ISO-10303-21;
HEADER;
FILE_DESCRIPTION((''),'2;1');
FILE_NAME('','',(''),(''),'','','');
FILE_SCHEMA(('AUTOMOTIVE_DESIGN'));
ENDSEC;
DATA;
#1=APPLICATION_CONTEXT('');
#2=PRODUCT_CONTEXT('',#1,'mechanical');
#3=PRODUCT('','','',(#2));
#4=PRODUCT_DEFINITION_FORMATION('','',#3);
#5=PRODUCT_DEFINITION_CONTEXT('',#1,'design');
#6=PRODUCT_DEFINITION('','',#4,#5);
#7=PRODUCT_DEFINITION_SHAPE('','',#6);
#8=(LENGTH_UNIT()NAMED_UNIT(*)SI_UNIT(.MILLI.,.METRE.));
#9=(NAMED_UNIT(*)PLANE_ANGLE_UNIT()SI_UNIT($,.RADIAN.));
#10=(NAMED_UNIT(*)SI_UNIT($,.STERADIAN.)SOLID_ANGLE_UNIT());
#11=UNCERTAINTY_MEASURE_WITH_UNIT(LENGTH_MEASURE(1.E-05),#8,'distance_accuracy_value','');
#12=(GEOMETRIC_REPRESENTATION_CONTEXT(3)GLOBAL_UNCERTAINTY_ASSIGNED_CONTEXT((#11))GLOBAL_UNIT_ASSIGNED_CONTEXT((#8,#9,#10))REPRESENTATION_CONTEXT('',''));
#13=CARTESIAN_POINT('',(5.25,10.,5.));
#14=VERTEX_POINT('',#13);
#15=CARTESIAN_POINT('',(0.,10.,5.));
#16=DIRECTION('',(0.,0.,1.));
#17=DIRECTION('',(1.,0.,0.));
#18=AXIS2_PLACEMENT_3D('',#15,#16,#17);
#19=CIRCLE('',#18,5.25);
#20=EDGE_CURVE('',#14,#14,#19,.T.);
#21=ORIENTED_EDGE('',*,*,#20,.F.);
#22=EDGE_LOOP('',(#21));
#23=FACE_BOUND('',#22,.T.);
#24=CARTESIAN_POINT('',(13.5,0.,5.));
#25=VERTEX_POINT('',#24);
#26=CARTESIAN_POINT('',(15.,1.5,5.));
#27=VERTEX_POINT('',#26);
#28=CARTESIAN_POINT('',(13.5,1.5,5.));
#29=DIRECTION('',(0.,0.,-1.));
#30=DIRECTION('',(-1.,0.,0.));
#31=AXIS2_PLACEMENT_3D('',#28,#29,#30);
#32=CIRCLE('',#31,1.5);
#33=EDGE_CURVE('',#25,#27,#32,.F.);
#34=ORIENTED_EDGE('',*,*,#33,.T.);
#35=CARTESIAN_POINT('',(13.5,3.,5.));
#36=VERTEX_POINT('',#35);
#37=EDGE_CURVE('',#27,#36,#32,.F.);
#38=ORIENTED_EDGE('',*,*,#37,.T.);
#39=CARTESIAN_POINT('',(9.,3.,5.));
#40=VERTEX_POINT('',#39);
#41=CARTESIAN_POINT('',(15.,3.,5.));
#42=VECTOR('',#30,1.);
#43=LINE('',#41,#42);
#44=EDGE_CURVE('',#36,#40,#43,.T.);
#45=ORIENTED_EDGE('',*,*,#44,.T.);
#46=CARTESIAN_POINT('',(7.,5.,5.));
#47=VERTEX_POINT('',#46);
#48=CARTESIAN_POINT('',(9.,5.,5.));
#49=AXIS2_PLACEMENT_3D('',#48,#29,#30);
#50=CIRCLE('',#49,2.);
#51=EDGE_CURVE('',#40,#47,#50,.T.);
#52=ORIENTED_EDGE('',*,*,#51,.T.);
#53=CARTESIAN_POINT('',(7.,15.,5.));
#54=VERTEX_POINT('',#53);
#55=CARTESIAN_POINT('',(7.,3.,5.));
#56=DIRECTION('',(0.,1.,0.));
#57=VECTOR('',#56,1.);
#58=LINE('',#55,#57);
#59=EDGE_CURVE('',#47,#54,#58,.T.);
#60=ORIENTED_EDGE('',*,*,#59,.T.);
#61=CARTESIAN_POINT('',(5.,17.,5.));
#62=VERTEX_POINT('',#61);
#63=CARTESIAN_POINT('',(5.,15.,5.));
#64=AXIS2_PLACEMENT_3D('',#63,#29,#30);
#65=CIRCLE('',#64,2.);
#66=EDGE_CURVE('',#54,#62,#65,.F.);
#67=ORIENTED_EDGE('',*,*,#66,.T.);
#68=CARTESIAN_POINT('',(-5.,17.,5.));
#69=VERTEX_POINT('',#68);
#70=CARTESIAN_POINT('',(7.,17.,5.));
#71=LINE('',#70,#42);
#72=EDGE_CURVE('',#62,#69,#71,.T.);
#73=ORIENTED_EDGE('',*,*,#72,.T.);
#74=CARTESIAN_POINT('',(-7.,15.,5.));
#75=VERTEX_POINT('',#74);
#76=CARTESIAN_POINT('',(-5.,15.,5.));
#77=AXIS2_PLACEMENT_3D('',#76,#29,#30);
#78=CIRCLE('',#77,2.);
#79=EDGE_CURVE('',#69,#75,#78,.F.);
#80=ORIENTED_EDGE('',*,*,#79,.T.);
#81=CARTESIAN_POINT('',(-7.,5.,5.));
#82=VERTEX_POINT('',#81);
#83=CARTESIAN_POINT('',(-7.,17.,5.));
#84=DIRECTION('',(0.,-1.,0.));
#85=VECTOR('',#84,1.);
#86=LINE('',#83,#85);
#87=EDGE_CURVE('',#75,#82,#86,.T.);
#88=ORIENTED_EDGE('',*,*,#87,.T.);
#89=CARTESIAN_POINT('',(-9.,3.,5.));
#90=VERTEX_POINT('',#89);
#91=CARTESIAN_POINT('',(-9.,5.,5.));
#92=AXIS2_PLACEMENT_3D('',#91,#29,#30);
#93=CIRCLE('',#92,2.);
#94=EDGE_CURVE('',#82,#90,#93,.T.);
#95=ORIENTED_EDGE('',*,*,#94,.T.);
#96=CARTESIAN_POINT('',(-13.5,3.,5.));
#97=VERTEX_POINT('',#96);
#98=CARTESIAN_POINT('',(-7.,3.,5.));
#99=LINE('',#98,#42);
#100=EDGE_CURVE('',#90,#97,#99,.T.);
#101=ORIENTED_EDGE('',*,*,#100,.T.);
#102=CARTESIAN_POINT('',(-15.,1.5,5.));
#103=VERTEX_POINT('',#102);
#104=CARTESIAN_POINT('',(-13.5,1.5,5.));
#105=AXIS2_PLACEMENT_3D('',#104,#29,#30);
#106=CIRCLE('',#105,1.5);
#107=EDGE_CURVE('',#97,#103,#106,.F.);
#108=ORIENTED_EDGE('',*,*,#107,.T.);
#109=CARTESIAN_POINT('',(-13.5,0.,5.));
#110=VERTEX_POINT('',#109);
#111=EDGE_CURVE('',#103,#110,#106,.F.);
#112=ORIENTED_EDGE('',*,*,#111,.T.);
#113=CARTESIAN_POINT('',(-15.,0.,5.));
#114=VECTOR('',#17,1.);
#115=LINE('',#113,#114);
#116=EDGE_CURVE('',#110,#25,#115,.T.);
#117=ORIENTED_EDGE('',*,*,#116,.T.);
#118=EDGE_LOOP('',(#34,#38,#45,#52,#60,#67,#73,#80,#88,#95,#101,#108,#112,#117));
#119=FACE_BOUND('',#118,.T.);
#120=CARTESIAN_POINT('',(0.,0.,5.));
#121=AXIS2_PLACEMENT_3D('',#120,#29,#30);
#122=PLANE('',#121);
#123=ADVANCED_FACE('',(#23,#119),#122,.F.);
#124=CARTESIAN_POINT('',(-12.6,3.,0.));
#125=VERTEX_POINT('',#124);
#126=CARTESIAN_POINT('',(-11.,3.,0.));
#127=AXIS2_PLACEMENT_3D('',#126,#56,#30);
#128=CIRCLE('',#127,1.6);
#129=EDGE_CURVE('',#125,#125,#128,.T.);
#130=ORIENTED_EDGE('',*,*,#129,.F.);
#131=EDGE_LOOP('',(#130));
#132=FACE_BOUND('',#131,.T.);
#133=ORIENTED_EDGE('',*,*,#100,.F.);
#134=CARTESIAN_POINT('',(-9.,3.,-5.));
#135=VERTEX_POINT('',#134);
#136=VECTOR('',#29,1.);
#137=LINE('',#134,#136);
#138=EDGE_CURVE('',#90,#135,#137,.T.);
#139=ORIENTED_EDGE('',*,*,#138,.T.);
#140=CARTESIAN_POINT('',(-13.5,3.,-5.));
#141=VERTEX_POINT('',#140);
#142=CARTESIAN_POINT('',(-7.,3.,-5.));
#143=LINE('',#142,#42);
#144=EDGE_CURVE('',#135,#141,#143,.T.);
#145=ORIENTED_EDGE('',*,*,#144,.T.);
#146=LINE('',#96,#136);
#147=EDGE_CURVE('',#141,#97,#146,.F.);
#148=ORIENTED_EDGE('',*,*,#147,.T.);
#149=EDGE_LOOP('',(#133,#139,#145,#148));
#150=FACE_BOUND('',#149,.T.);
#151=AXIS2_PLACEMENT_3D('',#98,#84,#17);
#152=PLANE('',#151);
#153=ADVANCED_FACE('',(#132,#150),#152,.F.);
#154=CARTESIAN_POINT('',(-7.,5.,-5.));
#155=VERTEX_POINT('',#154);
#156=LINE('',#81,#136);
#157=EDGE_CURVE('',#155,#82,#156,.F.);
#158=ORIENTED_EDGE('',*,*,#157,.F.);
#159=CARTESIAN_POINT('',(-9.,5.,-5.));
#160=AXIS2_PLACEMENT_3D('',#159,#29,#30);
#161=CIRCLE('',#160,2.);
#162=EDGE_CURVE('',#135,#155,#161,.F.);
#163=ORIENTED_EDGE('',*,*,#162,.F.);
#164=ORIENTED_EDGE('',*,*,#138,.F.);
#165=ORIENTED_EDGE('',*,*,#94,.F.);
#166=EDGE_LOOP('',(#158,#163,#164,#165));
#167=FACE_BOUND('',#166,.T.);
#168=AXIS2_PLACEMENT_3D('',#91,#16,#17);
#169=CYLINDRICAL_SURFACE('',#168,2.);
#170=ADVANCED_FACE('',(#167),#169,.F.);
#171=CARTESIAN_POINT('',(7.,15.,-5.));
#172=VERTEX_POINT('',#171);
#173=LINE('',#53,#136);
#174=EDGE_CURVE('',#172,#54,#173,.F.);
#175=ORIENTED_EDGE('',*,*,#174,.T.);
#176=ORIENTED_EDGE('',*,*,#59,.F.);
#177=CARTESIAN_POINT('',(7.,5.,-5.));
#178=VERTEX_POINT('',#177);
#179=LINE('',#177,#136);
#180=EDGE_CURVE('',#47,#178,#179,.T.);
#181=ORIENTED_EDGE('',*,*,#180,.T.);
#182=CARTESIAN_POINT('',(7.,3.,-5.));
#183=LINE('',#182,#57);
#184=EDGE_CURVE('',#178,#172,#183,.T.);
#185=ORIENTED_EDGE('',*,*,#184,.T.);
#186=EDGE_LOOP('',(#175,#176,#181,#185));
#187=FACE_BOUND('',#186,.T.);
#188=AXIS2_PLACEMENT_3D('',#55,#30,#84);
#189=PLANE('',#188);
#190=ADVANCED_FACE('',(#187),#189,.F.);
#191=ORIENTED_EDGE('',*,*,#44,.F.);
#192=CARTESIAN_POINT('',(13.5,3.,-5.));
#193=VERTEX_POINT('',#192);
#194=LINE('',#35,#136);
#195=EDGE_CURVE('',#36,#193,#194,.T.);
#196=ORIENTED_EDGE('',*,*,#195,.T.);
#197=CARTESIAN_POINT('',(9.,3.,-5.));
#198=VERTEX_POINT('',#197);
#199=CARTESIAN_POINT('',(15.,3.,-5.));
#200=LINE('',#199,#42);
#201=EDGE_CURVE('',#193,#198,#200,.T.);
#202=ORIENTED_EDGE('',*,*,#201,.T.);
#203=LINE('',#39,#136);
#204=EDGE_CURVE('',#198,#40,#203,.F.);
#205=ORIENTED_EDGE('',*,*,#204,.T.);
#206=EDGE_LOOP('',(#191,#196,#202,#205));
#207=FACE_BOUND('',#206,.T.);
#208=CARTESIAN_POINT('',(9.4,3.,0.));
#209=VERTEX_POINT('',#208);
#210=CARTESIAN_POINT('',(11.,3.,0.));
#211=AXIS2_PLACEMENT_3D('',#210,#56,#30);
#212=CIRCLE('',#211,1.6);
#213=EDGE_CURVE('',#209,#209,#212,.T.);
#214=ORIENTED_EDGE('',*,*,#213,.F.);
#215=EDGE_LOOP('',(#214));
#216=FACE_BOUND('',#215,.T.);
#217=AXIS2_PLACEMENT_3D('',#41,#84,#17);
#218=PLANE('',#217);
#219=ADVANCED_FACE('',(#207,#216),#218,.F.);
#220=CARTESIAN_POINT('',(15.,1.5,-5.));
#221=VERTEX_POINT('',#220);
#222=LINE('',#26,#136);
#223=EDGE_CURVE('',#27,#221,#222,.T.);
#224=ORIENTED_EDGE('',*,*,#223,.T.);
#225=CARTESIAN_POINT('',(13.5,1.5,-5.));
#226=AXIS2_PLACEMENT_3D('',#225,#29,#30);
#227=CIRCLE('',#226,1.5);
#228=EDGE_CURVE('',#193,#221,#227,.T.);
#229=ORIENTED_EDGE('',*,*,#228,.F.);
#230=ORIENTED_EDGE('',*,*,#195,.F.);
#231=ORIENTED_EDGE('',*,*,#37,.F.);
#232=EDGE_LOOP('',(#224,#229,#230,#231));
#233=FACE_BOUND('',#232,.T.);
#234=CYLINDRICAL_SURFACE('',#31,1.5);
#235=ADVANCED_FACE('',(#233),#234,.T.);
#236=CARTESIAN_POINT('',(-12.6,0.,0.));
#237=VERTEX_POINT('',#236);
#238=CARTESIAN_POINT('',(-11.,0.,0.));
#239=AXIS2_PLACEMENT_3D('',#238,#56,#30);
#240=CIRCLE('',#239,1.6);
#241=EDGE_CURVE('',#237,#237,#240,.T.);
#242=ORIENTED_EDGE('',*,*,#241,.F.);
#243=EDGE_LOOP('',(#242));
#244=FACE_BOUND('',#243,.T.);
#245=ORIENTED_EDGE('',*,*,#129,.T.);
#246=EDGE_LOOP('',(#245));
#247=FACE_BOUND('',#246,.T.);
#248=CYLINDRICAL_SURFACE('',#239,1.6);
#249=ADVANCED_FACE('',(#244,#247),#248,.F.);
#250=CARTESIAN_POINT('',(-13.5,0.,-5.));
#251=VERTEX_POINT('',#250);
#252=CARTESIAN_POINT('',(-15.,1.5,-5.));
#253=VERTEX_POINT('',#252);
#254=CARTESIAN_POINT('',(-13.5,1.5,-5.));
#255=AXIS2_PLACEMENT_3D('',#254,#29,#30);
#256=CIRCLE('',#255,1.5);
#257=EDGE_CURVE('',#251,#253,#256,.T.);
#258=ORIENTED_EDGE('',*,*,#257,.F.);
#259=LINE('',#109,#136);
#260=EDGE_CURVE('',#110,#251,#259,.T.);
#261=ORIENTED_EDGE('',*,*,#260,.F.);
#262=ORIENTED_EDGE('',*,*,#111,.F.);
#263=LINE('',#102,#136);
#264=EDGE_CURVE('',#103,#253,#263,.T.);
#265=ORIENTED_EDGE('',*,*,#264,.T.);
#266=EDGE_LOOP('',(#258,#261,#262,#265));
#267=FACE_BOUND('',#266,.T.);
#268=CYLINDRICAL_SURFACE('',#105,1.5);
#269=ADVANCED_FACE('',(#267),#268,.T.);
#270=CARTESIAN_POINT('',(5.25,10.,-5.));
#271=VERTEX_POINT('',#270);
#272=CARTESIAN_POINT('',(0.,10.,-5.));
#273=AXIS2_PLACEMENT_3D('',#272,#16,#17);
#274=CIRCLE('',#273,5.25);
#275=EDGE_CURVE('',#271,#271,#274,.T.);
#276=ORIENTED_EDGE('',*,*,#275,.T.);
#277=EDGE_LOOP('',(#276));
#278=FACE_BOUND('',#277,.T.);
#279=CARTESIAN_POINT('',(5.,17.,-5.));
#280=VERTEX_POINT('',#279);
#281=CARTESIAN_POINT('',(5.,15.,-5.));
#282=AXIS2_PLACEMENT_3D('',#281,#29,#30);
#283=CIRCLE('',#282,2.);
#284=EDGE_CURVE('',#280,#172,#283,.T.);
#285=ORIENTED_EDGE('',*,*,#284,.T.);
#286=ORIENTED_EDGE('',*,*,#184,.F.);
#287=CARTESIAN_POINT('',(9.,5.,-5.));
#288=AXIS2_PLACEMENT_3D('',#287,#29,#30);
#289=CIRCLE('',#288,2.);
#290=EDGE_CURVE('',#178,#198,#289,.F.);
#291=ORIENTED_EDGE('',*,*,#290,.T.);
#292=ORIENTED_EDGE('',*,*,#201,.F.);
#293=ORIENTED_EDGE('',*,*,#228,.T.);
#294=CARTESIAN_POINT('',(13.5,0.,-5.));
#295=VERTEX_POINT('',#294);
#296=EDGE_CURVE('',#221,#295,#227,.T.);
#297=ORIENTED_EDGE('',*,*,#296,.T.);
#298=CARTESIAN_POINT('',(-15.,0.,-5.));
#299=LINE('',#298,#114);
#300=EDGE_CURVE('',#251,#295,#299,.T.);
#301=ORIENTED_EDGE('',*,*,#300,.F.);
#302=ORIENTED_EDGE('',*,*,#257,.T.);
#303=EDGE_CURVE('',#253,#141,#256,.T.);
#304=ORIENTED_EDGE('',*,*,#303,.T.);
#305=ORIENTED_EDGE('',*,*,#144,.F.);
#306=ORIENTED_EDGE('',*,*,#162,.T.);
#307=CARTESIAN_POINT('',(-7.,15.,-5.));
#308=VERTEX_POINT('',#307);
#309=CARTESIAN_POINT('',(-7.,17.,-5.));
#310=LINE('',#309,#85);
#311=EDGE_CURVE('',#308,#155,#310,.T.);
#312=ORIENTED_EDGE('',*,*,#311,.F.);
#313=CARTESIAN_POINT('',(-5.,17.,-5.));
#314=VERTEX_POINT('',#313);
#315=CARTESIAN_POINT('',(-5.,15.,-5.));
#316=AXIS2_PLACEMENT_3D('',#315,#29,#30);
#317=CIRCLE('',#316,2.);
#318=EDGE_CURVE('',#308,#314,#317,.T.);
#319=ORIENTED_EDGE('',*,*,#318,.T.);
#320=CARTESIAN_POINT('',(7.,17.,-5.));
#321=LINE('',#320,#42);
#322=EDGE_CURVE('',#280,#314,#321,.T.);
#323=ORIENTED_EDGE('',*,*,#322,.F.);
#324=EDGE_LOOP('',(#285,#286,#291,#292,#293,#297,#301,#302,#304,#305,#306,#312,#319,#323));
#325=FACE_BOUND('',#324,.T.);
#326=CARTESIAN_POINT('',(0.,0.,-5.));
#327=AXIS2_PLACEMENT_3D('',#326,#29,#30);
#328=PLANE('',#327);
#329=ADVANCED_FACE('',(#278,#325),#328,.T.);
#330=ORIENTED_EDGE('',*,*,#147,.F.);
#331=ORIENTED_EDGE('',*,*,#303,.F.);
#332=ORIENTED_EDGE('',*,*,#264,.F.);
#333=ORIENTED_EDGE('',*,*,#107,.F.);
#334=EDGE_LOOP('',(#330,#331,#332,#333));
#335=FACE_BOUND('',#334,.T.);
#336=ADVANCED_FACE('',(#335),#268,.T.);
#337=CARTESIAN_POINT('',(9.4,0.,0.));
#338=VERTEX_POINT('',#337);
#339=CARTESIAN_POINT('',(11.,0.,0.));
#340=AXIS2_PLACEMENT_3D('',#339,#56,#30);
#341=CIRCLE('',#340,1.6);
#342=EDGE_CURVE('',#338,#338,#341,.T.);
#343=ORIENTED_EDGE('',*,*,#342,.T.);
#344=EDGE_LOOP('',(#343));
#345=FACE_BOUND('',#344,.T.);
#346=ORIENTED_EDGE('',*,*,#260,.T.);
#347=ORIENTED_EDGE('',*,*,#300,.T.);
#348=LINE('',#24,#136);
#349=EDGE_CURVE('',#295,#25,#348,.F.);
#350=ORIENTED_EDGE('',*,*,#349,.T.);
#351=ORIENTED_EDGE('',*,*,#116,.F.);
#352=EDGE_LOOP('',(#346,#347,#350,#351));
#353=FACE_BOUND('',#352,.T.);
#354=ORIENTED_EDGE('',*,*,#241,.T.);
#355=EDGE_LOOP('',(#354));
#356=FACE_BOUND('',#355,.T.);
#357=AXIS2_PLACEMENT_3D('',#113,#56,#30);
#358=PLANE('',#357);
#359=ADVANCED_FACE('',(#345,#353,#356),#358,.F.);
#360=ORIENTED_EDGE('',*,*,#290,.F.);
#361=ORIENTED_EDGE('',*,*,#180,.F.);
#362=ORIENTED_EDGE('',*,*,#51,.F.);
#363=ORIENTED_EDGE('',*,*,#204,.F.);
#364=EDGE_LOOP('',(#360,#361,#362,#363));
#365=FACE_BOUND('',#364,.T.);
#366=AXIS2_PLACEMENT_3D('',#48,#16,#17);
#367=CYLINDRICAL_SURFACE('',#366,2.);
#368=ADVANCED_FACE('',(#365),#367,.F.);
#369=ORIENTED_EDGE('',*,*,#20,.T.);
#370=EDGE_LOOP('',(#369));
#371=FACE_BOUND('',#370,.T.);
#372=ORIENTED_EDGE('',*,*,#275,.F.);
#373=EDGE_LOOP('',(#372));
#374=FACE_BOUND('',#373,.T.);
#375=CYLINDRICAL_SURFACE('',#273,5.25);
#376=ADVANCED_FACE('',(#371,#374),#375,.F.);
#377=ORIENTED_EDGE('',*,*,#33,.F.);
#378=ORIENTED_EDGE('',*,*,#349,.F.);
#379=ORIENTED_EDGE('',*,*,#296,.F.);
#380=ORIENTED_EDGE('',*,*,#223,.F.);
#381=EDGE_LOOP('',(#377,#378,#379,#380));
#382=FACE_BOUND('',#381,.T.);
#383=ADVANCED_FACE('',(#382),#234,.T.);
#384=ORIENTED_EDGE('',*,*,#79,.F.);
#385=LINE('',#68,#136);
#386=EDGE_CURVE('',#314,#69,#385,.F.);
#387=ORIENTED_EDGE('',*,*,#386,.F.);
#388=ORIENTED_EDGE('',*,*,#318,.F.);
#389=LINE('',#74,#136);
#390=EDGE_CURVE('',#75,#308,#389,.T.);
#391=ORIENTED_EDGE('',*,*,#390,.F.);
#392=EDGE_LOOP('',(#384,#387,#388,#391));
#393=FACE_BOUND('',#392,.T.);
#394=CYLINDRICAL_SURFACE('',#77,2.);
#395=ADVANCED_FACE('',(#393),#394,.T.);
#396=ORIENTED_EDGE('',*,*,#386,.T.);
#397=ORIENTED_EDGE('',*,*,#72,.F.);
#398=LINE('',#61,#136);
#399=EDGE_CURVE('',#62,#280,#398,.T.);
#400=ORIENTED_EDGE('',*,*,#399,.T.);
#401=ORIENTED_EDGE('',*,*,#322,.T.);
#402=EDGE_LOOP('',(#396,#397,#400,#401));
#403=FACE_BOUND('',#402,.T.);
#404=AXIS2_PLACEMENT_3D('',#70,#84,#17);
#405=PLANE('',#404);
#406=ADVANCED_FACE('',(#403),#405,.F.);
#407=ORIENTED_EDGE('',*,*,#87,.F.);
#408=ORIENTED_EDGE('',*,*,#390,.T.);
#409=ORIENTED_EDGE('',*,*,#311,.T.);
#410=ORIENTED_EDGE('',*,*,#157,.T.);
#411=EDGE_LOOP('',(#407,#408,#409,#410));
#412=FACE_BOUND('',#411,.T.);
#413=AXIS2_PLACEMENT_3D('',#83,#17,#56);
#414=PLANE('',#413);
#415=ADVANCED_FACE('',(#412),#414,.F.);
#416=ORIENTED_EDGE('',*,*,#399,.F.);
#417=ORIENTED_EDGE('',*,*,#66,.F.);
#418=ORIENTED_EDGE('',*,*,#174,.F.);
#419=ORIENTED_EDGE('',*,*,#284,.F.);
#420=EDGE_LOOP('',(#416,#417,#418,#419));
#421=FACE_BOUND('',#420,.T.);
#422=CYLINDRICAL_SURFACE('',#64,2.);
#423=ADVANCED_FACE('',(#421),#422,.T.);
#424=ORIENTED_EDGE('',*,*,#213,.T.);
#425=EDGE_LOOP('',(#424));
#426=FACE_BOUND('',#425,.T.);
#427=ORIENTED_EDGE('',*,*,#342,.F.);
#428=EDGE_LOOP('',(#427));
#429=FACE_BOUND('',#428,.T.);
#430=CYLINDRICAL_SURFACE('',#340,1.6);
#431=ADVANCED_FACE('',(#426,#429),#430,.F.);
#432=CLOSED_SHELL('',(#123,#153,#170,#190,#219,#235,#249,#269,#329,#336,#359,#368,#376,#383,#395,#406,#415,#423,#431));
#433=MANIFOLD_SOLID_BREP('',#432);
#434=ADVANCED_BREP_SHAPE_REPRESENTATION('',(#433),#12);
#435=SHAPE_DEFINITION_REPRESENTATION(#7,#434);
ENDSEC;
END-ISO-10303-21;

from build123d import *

# Parameters (mm, degrees)
BOSS_EXTRUDE1_DEPTH = 5
SKETCH2_R           = 5.25
CUT_EXTRUDE1_DEPTH  = 25.779023387
SKETCH3_R           = 1.6
CUT_EXTRUDE2_DEPTH  = 22.118712082
FILLET1_R           = 2
FILLET2_R           = 1.5


with BuildPart() as part:
    # Sketch1 → Boss-Extrude1 (new, symmetric)
    with BuildSketch(Plane.XY):
        Polygon((-15, 0), (15, 0), (15, 3), (7, 3), (7, 17), (-7, 17), (-7, 3), (-15, 3), align=None)
    extrude(amount=BOSS_EXTRUDE1_DEPTH, both=True)

    # Sketch2 → Cut-Extrude1 (cut, through all)
    with BuildSketch(Plane.XY.offset(5)):
        with Locations((0, 10)):
            Circle(SKETCH2_R)
    extrude(amount=-CUT_EXTRUDE1_DEPTH, mode=Mode.SUBTRACT)

    # Sketch3 → Cut-Extrude2 (cut, through all)
    with BuildSketch(Plane(origin=(0, 3, 0), x_dir=(1, 0, 0), z_dir=(0, 1, 0))):
        with Locations(Location((11, 0, 0), (0, 0, 180))):
            Circle(SKETCH3_R)
        with Locations(Location((-11, 0, 0), (0, 0, 180))):
            Circle(SKETCH3_R)
    extrude(amount=-CUT_EXTRUDE2_DEPTH, mode=Mode.SUBTRACT)

    # Fillet1
    fillet1_edges = [part.edges().sort_by_distance(p)[0] for p in [
        (-7, 3, 0),
        (-7, 17, 0),
        (7, 17, 0),
        (7, 3, 0),
    ]]
    fillet(fillet1_edges, radius=FILLET1_R)

    # Fillet2
    fillet2_edges = [part.edges().sort_by_distance(p)[0] for p in [
        (-15, 0, 0),
        (-15, 3, 0),
        (15, 3, 0),
        (15, 0, 0),
    ]]
    fillet(fillet2_edges, radius=FILLET2_R - 0.0001)  # a hair under: the kernel refuses the full size


solid = part.part
